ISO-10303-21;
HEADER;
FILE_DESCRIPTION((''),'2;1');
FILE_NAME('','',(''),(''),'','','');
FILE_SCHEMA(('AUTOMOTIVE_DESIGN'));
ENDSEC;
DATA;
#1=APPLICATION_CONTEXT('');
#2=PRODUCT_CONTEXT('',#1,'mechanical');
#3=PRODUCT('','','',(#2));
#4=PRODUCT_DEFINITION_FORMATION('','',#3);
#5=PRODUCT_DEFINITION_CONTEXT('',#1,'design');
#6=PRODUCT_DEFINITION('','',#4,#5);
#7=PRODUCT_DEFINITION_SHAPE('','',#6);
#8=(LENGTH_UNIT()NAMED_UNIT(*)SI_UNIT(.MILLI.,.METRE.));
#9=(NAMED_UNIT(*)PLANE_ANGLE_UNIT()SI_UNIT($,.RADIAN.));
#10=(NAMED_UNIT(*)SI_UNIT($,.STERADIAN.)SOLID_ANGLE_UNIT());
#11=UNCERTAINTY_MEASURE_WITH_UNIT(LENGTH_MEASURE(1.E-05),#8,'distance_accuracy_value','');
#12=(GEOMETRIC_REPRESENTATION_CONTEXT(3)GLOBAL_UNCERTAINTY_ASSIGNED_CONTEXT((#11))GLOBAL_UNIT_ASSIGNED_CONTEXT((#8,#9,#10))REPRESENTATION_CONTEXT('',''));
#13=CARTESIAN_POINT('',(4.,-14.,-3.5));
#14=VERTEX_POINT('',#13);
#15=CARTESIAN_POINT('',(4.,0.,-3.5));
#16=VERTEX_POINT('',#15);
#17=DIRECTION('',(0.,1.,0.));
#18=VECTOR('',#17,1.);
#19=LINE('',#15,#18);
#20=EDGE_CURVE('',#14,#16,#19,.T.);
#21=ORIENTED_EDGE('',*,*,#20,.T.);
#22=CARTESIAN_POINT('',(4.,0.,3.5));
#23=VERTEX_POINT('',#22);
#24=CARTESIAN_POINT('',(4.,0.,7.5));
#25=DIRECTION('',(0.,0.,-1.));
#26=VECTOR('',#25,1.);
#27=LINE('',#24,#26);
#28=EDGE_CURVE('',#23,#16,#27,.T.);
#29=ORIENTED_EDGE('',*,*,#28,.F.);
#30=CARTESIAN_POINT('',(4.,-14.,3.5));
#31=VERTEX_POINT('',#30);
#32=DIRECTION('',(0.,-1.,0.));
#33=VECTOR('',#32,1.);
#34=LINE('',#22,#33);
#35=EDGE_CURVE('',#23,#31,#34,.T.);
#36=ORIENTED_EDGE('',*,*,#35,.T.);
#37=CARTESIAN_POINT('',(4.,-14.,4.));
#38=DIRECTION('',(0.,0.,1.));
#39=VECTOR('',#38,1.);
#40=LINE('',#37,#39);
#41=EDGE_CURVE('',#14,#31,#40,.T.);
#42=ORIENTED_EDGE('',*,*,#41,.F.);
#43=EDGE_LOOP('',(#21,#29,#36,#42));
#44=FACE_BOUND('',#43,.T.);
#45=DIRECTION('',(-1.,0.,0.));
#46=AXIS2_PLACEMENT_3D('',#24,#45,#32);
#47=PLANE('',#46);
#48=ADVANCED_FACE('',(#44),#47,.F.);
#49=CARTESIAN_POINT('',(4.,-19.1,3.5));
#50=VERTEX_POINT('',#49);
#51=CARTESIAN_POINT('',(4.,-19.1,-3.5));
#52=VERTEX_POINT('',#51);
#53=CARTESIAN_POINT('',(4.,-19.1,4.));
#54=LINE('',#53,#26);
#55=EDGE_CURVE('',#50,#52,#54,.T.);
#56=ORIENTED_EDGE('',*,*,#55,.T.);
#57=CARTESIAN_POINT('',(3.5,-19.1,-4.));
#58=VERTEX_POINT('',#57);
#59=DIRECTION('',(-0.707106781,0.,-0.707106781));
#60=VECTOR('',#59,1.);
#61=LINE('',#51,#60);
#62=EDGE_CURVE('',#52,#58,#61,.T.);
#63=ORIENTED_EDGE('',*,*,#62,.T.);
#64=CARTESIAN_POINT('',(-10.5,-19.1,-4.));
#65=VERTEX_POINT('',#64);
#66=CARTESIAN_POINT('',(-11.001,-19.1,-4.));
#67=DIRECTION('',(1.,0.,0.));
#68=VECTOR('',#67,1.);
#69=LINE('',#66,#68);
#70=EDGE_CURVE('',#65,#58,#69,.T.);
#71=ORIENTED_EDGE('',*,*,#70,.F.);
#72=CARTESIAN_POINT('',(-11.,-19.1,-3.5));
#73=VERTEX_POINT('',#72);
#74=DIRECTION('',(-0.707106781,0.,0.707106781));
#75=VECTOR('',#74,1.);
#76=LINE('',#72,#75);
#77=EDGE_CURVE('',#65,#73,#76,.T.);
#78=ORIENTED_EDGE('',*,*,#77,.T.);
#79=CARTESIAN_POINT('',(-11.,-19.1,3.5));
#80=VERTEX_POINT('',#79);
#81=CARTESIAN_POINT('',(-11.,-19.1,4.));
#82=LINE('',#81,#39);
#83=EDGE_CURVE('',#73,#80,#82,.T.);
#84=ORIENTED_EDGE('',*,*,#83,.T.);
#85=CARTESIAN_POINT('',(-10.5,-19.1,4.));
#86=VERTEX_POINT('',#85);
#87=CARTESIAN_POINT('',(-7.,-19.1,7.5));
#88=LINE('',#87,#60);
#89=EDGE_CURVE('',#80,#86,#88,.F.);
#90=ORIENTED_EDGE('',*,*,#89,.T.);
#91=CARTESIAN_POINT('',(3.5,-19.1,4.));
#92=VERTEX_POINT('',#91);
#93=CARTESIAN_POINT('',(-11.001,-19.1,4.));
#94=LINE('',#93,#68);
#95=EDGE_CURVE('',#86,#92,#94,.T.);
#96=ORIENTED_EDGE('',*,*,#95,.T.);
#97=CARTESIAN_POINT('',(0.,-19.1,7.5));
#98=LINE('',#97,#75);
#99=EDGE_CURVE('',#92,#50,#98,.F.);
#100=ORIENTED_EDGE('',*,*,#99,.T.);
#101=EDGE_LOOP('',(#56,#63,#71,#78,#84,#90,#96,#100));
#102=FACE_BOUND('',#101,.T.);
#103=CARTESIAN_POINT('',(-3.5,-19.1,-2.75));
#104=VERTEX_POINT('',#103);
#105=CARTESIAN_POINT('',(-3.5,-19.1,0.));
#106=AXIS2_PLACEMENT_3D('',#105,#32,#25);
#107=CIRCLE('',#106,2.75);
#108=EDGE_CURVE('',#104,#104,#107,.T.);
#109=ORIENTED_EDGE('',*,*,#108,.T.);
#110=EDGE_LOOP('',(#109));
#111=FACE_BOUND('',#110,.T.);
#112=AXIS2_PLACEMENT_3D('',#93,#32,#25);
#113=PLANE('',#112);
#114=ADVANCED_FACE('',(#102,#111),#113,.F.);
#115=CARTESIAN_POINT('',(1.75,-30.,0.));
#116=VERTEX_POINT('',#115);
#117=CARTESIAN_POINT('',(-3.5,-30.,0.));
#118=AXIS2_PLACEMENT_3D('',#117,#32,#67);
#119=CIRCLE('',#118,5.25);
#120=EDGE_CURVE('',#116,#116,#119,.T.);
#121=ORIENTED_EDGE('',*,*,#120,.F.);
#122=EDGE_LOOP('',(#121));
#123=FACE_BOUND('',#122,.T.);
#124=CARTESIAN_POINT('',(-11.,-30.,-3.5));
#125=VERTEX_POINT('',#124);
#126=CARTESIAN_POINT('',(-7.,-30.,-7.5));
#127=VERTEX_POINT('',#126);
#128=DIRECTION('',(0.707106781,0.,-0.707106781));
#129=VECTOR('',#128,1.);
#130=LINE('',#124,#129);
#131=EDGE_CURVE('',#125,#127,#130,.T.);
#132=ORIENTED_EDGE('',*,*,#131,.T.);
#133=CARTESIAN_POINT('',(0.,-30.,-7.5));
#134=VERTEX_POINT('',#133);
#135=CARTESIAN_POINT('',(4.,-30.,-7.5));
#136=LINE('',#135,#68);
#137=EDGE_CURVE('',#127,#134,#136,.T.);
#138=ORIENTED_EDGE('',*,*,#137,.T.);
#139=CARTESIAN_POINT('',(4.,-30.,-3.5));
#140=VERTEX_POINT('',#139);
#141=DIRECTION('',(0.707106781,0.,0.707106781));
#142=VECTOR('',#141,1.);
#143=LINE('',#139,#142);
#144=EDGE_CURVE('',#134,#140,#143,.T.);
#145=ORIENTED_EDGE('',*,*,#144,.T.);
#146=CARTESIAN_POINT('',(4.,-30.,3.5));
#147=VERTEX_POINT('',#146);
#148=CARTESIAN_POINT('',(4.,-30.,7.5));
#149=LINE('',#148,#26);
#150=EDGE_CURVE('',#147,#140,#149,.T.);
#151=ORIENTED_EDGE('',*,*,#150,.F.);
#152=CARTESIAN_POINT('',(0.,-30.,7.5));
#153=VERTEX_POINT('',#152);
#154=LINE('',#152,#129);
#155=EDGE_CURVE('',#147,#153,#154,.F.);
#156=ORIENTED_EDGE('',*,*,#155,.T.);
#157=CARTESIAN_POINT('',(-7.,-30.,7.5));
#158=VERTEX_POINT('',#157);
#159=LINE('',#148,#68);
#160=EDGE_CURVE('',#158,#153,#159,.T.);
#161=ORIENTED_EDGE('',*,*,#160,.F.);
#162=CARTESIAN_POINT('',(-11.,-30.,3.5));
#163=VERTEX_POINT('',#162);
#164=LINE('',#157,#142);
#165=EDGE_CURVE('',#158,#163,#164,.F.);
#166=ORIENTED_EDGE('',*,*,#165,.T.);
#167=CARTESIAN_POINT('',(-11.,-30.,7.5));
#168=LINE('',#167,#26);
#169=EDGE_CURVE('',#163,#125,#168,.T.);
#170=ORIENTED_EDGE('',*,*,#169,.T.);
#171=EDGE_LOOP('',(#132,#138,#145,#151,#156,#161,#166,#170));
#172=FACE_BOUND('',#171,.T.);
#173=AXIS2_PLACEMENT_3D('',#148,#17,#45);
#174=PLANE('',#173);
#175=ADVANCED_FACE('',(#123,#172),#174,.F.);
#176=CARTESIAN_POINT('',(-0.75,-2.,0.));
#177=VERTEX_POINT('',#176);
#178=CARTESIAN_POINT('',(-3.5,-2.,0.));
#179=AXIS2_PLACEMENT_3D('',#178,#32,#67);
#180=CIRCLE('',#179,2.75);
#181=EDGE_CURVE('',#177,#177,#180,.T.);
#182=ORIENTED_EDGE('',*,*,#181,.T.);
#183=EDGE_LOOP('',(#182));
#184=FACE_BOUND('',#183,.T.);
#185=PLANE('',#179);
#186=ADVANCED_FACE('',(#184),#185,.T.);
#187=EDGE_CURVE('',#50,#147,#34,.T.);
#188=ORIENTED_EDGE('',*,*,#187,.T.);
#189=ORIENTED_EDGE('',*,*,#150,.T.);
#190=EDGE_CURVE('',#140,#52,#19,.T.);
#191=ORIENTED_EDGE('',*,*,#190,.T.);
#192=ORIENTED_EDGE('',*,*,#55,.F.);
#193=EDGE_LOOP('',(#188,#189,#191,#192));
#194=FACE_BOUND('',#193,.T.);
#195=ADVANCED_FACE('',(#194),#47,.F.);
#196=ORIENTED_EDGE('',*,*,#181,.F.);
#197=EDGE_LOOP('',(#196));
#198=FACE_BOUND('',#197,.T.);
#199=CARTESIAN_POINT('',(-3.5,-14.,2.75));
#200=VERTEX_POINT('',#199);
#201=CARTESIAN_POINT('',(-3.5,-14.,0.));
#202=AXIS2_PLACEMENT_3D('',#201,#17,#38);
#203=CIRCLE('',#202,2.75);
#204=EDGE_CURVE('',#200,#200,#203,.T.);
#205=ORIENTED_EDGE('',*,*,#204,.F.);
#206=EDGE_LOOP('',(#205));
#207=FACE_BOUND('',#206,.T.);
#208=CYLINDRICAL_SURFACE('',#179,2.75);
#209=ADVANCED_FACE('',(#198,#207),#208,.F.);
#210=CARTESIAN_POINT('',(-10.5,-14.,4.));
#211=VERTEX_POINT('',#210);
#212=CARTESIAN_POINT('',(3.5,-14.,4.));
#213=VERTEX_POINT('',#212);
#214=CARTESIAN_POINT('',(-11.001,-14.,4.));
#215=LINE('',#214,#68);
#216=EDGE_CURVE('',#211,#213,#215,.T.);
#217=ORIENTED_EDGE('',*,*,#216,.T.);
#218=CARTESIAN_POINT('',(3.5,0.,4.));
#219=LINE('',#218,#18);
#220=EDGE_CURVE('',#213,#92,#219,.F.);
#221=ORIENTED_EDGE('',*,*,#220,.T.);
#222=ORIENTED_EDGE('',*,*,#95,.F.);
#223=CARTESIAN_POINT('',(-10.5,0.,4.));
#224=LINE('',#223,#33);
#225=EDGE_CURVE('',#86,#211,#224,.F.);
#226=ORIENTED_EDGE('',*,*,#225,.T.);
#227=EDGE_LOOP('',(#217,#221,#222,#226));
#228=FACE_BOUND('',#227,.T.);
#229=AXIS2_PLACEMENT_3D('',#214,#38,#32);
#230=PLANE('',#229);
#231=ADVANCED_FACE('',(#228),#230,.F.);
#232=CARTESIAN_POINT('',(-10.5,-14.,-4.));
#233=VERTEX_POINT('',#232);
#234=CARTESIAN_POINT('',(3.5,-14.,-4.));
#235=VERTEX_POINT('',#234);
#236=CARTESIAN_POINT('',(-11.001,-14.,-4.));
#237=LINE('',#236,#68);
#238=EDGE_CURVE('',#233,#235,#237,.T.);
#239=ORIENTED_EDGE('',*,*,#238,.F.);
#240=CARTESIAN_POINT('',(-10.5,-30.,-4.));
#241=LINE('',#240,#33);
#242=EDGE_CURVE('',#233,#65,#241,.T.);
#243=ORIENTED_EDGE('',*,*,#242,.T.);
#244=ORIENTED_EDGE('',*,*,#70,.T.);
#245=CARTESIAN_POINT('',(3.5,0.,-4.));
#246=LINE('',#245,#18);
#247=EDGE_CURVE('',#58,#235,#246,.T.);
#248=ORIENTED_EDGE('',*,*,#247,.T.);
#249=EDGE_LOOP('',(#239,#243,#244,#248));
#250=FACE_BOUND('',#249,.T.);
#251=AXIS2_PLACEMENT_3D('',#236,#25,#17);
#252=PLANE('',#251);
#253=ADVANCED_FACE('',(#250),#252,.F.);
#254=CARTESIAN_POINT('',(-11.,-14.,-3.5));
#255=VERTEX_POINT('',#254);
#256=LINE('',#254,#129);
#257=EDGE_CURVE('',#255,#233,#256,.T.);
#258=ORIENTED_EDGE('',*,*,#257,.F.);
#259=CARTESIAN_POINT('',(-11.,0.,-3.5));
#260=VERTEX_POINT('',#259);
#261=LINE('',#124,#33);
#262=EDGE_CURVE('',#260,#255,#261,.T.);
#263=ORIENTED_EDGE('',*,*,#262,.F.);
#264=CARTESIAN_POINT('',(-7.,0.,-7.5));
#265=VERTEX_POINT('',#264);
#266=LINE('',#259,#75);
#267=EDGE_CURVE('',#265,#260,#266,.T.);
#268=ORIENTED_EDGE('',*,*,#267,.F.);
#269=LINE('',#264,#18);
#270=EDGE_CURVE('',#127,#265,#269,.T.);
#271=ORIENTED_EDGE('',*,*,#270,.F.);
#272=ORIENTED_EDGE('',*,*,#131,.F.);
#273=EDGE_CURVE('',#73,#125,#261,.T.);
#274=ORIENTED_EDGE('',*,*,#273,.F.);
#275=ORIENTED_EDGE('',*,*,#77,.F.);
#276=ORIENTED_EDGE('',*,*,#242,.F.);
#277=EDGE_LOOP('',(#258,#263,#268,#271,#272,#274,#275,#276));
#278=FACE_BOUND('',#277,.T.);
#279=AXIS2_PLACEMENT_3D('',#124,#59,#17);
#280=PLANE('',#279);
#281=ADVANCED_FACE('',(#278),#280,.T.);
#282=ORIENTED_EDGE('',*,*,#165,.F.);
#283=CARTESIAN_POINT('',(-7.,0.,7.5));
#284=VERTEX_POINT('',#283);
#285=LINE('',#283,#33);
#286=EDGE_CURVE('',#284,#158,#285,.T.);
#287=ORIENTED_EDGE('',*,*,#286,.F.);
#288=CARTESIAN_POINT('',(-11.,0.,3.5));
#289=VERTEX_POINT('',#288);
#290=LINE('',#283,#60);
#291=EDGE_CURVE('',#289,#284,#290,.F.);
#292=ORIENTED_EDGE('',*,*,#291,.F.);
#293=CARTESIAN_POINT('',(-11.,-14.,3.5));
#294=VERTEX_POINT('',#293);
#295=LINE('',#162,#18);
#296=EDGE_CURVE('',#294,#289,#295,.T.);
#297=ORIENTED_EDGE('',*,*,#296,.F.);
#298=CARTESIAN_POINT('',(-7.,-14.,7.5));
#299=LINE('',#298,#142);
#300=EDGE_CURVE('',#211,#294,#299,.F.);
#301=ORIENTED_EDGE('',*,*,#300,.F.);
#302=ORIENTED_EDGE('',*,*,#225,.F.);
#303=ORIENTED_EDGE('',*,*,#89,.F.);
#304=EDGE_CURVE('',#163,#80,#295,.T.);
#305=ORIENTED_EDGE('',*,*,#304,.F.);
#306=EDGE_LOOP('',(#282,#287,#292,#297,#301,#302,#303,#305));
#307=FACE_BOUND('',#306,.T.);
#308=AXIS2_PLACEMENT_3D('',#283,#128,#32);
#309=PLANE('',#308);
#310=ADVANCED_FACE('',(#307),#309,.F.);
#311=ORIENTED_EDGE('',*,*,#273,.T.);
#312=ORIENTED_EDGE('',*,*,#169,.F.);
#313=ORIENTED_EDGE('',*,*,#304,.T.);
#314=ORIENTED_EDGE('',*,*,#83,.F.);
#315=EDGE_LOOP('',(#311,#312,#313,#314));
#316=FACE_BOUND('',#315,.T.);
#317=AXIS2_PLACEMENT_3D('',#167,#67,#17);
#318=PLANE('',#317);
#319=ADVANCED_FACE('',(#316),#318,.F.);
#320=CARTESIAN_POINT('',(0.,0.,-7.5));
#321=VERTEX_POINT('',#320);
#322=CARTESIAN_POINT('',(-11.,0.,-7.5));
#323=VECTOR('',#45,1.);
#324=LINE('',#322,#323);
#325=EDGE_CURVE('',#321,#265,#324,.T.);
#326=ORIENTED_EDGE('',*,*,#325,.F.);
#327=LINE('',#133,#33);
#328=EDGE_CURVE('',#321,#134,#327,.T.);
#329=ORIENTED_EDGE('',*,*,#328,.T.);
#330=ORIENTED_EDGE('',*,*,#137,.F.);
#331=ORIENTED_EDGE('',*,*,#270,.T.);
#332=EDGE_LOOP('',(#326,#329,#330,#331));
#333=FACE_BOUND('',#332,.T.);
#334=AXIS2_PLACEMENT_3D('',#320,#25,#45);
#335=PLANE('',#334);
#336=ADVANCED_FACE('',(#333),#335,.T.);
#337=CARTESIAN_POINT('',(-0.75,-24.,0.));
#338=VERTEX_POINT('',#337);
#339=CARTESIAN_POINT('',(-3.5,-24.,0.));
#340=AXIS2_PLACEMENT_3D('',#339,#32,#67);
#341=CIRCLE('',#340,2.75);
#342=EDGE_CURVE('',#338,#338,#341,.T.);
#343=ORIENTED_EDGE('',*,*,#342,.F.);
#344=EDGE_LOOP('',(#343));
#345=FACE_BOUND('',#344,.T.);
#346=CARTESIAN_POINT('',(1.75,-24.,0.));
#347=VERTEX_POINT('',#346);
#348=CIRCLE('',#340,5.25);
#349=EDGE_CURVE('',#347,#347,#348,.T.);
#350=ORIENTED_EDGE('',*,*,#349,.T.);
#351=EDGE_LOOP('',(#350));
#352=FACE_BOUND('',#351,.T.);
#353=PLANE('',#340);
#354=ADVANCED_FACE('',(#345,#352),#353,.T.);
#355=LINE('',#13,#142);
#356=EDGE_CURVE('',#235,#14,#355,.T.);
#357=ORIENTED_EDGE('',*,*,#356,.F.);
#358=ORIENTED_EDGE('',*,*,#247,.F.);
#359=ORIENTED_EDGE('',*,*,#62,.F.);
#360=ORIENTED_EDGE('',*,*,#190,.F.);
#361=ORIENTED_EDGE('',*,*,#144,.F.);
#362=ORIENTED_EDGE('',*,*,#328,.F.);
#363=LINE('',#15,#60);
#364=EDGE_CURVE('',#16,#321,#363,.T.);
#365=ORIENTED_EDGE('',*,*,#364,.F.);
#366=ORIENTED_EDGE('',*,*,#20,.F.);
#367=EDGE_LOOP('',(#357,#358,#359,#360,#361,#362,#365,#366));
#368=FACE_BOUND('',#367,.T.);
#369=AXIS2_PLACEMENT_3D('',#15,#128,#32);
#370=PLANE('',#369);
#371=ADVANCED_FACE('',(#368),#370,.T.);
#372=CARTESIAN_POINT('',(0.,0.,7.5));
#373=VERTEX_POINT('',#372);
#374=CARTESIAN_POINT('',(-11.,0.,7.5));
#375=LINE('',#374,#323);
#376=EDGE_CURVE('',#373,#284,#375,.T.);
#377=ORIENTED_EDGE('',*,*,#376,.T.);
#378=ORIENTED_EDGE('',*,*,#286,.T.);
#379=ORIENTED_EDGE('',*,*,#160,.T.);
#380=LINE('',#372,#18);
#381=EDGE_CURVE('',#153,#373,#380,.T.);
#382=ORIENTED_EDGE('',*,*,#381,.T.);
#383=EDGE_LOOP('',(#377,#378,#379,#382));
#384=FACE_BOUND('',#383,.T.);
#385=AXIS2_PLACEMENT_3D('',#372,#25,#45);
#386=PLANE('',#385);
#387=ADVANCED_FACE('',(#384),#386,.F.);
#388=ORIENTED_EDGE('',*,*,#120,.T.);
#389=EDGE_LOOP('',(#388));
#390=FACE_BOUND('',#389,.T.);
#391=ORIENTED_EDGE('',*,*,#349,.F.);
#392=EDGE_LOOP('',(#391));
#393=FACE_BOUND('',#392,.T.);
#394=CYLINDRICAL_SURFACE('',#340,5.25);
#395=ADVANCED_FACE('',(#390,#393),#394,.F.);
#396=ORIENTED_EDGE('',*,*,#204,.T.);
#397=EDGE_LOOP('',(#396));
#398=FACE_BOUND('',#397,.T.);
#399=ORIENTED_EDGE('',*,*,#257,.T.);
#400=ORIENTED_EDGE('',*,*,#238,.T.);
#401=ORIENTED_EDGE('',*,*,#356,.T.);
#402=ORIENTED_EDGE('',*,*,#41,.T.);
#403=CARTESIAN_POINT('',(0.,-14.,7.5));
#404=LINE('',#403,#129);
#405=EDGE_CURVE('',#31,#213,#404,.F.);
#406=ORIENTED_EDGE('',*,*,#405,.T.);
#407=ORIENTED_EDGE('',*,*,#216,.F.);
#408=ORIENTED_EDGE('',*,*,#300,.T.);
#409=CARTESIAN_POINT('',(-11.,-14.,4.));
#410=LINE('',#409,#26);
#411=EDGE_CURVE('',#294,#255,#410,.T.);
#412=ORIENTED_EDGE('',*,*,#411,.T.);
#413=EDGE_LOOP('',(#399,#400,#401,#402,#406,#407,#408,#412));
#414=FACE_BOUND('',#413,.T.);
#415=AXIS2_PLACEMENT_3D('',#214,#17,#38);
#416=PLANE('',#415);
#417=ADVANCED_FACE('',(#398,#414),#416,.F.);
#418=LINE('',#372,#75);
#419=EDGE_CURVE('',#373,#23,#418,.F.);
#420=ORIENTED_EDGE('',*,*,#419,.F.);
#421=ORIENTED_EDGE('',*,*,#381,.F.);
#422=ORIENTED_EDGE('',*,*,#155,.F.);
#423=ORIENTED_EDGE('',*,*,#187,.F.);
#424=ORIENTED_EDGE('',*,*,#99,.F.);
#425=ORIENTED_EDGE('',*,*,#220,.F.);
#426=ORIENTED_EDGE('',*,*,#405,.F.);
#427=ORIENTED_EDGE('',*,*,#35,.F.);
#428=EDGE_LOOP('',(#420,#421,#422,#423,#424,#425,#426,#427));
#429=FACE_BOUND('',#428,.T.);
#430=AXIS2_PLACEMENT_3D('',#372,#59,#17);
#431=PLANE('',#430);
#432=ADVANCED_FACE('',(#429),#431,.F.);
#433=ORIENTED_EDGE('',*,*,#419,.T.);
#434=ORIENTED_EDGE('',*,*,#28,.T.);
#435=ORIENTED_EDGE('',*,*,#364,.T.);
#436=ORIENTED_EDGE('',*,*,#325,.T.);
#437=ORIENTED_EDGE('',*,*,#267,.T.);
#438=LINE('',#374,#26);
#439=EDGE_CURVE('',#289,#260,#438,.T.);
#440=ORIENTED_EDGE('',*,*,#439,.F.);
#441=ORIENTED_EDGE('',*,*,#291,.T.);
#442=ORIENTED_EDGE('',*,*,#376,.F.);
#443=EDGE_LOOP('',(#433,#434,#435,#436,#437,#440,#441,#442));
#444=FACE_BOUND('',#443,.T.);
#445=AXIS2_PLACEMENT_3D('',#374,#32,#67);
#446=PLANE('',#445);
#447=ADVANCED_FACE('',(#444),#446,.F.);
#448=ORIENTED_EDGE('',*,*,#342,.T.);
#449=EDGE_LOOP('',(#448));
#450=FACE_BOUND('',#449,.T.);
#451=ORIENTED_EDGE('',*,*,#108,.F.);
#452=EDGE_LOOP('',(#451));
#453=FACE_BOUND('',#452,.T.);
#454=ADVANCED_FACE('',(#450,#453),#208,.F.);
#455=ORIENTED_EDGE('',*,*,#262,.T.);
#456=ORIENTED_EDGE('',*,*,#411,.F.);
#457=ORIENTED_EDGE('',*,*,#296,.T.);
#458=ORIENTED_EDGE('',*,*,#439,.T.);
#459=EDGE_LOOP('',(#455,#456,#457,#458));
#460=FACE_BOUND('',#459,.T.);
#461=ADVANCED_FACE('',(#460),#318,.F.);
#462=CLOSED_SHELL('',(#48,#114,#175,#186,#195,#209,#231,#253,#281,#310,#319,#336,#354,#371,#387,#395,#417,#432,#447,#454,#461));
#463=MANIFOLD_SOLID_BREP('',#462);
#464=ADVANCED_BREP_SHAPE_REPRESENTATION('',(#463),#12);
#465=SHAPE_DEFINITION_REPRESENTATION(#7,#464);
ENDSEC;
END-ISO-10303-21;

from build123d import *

# Parameters (mm, degrees)
SKETCH1_W           = 15
SKETCH1_H           = 30
BOSS_EXTRUDE1_DEPTH = 7.5
SKETCH2_R           = 5.25
CUT_EXTRUDE1_DEPTH  = 6
SKETCH4_R           = 2.75
CUT_EXTRUDE3_DEPTH  = 28
CUT_EXTRUDE4_REACH  = 36.369
SKETCH5_W           = 8
SKETCH5_H           = 5.1
CHAMFER3_SIZE       = 4


with BuildPart() as part:
    # Sketch1 → Boss-Extrude1 (new, symmetric)
    with BuildSketch(Plane.XY):
        with Locations((-3.5, -15)):
            Rectangle(SKETCH1_W, SKETCH1_H)
    extrude(amount=BOSS_EXTRUDE1_DEPTH, both=True)

    # Sketch2 → Cut-Extrude1 (cut)
    with BuildSketch(Plane.XZ.offset(30)):
        with Locations((-3.5, 0)):
            Circle(SKETCH2_R)
    extrude(amount=-CUT_EXTRUDE1_DEPTH, mode=Mode.SUBTRACT)

    # Sketch4 → Cut-Extrude3 (cut)
    with BuildSketch(Plane.XZ.offset(30)):
        with Locations((-3.5, 0)):
            Circle(SKETCH4_R)
    extrude(amount=-CUT_EXTRUDE3_DEPTH, mode=Mode.SUBTRACT)

    # Sketch5 → Cut-Extrude4 (cut, up to next)
    with BuildSketch(Plane(origin=(4, 0, 0), x_dir=(0, 0, -1), z_dir=(1, 0, 0)), mode=Mode.PRIVATE) as cut_extrude4_sk1:
        with Locations((0, -16.55)):
            Rectangle(SKETCH5_W, SKETCH5_H)
    cut_extrude4_tool1 = extrude(cut_extrude4_sk1.sketch, amount=-CUT_EXTRUDE4_REACH, mode=Mode.PRIVATE) & part.part
    add(cut_extrude4_tool1.solids().sort_by_distance((4, -16.55, 0))[0], mode=Mode.SUBTRACT)

    # Chamfer3
    # the kernel refuses this chamfer: 4 mm, written as the material it takes off along each edge
    with BuildSketch(Plane(origin=(-11, -40.286731952, 7.5), x_dir=(0.9996219169112968, 0, 0.027495876610586275), z_dir=(0, 1, 0)), Plane(origin=(4, 10.286731952, -7.5), x_dir=(0.02749587661058638, 0, 0.9996219169112968), z_dir=(0, -1, 0))) as chamfer3_piece_1:
        Polygon((CHAMFER3_SIZE * 0.999621916911, CHAMFER3_SIZE * 0.0274958766106), (-CHAMFER3_SIZE * 0.0274958766106, CHAMFER3_SIZE * 0.999621916911), (0, 0), align=None)
    extrude(amount=50.573463904, mode=Mode.SUBTRACT)
    with BuildSketch(Plane(origin=(-11, -40.286731952, -7.5), x_dir=(0.9996219169112968, 0, -0.027495876610586275), z_dir=(0, 1, 0)), Plane(origin=(4, 10.286731952, 7.5), x_dir=(0.02749587661058638, 0, -0.9996219169112968), z_dir=(0, -1, 0))) as chamfer3_piece_2:
        Polygon((CHAMFER3_SIZE * 0.999621916911, -CHAMFER3_SIZE * 0.0274958766106), (-CHAMFER3_SIZE * 0.0274958766106, -CHAMFER3_SIZE * 0.999621916911), (0, 0), align=None)
    extrude(amount=50.573463904, mode=Mode.SUBTRACT)


solid = part.part
